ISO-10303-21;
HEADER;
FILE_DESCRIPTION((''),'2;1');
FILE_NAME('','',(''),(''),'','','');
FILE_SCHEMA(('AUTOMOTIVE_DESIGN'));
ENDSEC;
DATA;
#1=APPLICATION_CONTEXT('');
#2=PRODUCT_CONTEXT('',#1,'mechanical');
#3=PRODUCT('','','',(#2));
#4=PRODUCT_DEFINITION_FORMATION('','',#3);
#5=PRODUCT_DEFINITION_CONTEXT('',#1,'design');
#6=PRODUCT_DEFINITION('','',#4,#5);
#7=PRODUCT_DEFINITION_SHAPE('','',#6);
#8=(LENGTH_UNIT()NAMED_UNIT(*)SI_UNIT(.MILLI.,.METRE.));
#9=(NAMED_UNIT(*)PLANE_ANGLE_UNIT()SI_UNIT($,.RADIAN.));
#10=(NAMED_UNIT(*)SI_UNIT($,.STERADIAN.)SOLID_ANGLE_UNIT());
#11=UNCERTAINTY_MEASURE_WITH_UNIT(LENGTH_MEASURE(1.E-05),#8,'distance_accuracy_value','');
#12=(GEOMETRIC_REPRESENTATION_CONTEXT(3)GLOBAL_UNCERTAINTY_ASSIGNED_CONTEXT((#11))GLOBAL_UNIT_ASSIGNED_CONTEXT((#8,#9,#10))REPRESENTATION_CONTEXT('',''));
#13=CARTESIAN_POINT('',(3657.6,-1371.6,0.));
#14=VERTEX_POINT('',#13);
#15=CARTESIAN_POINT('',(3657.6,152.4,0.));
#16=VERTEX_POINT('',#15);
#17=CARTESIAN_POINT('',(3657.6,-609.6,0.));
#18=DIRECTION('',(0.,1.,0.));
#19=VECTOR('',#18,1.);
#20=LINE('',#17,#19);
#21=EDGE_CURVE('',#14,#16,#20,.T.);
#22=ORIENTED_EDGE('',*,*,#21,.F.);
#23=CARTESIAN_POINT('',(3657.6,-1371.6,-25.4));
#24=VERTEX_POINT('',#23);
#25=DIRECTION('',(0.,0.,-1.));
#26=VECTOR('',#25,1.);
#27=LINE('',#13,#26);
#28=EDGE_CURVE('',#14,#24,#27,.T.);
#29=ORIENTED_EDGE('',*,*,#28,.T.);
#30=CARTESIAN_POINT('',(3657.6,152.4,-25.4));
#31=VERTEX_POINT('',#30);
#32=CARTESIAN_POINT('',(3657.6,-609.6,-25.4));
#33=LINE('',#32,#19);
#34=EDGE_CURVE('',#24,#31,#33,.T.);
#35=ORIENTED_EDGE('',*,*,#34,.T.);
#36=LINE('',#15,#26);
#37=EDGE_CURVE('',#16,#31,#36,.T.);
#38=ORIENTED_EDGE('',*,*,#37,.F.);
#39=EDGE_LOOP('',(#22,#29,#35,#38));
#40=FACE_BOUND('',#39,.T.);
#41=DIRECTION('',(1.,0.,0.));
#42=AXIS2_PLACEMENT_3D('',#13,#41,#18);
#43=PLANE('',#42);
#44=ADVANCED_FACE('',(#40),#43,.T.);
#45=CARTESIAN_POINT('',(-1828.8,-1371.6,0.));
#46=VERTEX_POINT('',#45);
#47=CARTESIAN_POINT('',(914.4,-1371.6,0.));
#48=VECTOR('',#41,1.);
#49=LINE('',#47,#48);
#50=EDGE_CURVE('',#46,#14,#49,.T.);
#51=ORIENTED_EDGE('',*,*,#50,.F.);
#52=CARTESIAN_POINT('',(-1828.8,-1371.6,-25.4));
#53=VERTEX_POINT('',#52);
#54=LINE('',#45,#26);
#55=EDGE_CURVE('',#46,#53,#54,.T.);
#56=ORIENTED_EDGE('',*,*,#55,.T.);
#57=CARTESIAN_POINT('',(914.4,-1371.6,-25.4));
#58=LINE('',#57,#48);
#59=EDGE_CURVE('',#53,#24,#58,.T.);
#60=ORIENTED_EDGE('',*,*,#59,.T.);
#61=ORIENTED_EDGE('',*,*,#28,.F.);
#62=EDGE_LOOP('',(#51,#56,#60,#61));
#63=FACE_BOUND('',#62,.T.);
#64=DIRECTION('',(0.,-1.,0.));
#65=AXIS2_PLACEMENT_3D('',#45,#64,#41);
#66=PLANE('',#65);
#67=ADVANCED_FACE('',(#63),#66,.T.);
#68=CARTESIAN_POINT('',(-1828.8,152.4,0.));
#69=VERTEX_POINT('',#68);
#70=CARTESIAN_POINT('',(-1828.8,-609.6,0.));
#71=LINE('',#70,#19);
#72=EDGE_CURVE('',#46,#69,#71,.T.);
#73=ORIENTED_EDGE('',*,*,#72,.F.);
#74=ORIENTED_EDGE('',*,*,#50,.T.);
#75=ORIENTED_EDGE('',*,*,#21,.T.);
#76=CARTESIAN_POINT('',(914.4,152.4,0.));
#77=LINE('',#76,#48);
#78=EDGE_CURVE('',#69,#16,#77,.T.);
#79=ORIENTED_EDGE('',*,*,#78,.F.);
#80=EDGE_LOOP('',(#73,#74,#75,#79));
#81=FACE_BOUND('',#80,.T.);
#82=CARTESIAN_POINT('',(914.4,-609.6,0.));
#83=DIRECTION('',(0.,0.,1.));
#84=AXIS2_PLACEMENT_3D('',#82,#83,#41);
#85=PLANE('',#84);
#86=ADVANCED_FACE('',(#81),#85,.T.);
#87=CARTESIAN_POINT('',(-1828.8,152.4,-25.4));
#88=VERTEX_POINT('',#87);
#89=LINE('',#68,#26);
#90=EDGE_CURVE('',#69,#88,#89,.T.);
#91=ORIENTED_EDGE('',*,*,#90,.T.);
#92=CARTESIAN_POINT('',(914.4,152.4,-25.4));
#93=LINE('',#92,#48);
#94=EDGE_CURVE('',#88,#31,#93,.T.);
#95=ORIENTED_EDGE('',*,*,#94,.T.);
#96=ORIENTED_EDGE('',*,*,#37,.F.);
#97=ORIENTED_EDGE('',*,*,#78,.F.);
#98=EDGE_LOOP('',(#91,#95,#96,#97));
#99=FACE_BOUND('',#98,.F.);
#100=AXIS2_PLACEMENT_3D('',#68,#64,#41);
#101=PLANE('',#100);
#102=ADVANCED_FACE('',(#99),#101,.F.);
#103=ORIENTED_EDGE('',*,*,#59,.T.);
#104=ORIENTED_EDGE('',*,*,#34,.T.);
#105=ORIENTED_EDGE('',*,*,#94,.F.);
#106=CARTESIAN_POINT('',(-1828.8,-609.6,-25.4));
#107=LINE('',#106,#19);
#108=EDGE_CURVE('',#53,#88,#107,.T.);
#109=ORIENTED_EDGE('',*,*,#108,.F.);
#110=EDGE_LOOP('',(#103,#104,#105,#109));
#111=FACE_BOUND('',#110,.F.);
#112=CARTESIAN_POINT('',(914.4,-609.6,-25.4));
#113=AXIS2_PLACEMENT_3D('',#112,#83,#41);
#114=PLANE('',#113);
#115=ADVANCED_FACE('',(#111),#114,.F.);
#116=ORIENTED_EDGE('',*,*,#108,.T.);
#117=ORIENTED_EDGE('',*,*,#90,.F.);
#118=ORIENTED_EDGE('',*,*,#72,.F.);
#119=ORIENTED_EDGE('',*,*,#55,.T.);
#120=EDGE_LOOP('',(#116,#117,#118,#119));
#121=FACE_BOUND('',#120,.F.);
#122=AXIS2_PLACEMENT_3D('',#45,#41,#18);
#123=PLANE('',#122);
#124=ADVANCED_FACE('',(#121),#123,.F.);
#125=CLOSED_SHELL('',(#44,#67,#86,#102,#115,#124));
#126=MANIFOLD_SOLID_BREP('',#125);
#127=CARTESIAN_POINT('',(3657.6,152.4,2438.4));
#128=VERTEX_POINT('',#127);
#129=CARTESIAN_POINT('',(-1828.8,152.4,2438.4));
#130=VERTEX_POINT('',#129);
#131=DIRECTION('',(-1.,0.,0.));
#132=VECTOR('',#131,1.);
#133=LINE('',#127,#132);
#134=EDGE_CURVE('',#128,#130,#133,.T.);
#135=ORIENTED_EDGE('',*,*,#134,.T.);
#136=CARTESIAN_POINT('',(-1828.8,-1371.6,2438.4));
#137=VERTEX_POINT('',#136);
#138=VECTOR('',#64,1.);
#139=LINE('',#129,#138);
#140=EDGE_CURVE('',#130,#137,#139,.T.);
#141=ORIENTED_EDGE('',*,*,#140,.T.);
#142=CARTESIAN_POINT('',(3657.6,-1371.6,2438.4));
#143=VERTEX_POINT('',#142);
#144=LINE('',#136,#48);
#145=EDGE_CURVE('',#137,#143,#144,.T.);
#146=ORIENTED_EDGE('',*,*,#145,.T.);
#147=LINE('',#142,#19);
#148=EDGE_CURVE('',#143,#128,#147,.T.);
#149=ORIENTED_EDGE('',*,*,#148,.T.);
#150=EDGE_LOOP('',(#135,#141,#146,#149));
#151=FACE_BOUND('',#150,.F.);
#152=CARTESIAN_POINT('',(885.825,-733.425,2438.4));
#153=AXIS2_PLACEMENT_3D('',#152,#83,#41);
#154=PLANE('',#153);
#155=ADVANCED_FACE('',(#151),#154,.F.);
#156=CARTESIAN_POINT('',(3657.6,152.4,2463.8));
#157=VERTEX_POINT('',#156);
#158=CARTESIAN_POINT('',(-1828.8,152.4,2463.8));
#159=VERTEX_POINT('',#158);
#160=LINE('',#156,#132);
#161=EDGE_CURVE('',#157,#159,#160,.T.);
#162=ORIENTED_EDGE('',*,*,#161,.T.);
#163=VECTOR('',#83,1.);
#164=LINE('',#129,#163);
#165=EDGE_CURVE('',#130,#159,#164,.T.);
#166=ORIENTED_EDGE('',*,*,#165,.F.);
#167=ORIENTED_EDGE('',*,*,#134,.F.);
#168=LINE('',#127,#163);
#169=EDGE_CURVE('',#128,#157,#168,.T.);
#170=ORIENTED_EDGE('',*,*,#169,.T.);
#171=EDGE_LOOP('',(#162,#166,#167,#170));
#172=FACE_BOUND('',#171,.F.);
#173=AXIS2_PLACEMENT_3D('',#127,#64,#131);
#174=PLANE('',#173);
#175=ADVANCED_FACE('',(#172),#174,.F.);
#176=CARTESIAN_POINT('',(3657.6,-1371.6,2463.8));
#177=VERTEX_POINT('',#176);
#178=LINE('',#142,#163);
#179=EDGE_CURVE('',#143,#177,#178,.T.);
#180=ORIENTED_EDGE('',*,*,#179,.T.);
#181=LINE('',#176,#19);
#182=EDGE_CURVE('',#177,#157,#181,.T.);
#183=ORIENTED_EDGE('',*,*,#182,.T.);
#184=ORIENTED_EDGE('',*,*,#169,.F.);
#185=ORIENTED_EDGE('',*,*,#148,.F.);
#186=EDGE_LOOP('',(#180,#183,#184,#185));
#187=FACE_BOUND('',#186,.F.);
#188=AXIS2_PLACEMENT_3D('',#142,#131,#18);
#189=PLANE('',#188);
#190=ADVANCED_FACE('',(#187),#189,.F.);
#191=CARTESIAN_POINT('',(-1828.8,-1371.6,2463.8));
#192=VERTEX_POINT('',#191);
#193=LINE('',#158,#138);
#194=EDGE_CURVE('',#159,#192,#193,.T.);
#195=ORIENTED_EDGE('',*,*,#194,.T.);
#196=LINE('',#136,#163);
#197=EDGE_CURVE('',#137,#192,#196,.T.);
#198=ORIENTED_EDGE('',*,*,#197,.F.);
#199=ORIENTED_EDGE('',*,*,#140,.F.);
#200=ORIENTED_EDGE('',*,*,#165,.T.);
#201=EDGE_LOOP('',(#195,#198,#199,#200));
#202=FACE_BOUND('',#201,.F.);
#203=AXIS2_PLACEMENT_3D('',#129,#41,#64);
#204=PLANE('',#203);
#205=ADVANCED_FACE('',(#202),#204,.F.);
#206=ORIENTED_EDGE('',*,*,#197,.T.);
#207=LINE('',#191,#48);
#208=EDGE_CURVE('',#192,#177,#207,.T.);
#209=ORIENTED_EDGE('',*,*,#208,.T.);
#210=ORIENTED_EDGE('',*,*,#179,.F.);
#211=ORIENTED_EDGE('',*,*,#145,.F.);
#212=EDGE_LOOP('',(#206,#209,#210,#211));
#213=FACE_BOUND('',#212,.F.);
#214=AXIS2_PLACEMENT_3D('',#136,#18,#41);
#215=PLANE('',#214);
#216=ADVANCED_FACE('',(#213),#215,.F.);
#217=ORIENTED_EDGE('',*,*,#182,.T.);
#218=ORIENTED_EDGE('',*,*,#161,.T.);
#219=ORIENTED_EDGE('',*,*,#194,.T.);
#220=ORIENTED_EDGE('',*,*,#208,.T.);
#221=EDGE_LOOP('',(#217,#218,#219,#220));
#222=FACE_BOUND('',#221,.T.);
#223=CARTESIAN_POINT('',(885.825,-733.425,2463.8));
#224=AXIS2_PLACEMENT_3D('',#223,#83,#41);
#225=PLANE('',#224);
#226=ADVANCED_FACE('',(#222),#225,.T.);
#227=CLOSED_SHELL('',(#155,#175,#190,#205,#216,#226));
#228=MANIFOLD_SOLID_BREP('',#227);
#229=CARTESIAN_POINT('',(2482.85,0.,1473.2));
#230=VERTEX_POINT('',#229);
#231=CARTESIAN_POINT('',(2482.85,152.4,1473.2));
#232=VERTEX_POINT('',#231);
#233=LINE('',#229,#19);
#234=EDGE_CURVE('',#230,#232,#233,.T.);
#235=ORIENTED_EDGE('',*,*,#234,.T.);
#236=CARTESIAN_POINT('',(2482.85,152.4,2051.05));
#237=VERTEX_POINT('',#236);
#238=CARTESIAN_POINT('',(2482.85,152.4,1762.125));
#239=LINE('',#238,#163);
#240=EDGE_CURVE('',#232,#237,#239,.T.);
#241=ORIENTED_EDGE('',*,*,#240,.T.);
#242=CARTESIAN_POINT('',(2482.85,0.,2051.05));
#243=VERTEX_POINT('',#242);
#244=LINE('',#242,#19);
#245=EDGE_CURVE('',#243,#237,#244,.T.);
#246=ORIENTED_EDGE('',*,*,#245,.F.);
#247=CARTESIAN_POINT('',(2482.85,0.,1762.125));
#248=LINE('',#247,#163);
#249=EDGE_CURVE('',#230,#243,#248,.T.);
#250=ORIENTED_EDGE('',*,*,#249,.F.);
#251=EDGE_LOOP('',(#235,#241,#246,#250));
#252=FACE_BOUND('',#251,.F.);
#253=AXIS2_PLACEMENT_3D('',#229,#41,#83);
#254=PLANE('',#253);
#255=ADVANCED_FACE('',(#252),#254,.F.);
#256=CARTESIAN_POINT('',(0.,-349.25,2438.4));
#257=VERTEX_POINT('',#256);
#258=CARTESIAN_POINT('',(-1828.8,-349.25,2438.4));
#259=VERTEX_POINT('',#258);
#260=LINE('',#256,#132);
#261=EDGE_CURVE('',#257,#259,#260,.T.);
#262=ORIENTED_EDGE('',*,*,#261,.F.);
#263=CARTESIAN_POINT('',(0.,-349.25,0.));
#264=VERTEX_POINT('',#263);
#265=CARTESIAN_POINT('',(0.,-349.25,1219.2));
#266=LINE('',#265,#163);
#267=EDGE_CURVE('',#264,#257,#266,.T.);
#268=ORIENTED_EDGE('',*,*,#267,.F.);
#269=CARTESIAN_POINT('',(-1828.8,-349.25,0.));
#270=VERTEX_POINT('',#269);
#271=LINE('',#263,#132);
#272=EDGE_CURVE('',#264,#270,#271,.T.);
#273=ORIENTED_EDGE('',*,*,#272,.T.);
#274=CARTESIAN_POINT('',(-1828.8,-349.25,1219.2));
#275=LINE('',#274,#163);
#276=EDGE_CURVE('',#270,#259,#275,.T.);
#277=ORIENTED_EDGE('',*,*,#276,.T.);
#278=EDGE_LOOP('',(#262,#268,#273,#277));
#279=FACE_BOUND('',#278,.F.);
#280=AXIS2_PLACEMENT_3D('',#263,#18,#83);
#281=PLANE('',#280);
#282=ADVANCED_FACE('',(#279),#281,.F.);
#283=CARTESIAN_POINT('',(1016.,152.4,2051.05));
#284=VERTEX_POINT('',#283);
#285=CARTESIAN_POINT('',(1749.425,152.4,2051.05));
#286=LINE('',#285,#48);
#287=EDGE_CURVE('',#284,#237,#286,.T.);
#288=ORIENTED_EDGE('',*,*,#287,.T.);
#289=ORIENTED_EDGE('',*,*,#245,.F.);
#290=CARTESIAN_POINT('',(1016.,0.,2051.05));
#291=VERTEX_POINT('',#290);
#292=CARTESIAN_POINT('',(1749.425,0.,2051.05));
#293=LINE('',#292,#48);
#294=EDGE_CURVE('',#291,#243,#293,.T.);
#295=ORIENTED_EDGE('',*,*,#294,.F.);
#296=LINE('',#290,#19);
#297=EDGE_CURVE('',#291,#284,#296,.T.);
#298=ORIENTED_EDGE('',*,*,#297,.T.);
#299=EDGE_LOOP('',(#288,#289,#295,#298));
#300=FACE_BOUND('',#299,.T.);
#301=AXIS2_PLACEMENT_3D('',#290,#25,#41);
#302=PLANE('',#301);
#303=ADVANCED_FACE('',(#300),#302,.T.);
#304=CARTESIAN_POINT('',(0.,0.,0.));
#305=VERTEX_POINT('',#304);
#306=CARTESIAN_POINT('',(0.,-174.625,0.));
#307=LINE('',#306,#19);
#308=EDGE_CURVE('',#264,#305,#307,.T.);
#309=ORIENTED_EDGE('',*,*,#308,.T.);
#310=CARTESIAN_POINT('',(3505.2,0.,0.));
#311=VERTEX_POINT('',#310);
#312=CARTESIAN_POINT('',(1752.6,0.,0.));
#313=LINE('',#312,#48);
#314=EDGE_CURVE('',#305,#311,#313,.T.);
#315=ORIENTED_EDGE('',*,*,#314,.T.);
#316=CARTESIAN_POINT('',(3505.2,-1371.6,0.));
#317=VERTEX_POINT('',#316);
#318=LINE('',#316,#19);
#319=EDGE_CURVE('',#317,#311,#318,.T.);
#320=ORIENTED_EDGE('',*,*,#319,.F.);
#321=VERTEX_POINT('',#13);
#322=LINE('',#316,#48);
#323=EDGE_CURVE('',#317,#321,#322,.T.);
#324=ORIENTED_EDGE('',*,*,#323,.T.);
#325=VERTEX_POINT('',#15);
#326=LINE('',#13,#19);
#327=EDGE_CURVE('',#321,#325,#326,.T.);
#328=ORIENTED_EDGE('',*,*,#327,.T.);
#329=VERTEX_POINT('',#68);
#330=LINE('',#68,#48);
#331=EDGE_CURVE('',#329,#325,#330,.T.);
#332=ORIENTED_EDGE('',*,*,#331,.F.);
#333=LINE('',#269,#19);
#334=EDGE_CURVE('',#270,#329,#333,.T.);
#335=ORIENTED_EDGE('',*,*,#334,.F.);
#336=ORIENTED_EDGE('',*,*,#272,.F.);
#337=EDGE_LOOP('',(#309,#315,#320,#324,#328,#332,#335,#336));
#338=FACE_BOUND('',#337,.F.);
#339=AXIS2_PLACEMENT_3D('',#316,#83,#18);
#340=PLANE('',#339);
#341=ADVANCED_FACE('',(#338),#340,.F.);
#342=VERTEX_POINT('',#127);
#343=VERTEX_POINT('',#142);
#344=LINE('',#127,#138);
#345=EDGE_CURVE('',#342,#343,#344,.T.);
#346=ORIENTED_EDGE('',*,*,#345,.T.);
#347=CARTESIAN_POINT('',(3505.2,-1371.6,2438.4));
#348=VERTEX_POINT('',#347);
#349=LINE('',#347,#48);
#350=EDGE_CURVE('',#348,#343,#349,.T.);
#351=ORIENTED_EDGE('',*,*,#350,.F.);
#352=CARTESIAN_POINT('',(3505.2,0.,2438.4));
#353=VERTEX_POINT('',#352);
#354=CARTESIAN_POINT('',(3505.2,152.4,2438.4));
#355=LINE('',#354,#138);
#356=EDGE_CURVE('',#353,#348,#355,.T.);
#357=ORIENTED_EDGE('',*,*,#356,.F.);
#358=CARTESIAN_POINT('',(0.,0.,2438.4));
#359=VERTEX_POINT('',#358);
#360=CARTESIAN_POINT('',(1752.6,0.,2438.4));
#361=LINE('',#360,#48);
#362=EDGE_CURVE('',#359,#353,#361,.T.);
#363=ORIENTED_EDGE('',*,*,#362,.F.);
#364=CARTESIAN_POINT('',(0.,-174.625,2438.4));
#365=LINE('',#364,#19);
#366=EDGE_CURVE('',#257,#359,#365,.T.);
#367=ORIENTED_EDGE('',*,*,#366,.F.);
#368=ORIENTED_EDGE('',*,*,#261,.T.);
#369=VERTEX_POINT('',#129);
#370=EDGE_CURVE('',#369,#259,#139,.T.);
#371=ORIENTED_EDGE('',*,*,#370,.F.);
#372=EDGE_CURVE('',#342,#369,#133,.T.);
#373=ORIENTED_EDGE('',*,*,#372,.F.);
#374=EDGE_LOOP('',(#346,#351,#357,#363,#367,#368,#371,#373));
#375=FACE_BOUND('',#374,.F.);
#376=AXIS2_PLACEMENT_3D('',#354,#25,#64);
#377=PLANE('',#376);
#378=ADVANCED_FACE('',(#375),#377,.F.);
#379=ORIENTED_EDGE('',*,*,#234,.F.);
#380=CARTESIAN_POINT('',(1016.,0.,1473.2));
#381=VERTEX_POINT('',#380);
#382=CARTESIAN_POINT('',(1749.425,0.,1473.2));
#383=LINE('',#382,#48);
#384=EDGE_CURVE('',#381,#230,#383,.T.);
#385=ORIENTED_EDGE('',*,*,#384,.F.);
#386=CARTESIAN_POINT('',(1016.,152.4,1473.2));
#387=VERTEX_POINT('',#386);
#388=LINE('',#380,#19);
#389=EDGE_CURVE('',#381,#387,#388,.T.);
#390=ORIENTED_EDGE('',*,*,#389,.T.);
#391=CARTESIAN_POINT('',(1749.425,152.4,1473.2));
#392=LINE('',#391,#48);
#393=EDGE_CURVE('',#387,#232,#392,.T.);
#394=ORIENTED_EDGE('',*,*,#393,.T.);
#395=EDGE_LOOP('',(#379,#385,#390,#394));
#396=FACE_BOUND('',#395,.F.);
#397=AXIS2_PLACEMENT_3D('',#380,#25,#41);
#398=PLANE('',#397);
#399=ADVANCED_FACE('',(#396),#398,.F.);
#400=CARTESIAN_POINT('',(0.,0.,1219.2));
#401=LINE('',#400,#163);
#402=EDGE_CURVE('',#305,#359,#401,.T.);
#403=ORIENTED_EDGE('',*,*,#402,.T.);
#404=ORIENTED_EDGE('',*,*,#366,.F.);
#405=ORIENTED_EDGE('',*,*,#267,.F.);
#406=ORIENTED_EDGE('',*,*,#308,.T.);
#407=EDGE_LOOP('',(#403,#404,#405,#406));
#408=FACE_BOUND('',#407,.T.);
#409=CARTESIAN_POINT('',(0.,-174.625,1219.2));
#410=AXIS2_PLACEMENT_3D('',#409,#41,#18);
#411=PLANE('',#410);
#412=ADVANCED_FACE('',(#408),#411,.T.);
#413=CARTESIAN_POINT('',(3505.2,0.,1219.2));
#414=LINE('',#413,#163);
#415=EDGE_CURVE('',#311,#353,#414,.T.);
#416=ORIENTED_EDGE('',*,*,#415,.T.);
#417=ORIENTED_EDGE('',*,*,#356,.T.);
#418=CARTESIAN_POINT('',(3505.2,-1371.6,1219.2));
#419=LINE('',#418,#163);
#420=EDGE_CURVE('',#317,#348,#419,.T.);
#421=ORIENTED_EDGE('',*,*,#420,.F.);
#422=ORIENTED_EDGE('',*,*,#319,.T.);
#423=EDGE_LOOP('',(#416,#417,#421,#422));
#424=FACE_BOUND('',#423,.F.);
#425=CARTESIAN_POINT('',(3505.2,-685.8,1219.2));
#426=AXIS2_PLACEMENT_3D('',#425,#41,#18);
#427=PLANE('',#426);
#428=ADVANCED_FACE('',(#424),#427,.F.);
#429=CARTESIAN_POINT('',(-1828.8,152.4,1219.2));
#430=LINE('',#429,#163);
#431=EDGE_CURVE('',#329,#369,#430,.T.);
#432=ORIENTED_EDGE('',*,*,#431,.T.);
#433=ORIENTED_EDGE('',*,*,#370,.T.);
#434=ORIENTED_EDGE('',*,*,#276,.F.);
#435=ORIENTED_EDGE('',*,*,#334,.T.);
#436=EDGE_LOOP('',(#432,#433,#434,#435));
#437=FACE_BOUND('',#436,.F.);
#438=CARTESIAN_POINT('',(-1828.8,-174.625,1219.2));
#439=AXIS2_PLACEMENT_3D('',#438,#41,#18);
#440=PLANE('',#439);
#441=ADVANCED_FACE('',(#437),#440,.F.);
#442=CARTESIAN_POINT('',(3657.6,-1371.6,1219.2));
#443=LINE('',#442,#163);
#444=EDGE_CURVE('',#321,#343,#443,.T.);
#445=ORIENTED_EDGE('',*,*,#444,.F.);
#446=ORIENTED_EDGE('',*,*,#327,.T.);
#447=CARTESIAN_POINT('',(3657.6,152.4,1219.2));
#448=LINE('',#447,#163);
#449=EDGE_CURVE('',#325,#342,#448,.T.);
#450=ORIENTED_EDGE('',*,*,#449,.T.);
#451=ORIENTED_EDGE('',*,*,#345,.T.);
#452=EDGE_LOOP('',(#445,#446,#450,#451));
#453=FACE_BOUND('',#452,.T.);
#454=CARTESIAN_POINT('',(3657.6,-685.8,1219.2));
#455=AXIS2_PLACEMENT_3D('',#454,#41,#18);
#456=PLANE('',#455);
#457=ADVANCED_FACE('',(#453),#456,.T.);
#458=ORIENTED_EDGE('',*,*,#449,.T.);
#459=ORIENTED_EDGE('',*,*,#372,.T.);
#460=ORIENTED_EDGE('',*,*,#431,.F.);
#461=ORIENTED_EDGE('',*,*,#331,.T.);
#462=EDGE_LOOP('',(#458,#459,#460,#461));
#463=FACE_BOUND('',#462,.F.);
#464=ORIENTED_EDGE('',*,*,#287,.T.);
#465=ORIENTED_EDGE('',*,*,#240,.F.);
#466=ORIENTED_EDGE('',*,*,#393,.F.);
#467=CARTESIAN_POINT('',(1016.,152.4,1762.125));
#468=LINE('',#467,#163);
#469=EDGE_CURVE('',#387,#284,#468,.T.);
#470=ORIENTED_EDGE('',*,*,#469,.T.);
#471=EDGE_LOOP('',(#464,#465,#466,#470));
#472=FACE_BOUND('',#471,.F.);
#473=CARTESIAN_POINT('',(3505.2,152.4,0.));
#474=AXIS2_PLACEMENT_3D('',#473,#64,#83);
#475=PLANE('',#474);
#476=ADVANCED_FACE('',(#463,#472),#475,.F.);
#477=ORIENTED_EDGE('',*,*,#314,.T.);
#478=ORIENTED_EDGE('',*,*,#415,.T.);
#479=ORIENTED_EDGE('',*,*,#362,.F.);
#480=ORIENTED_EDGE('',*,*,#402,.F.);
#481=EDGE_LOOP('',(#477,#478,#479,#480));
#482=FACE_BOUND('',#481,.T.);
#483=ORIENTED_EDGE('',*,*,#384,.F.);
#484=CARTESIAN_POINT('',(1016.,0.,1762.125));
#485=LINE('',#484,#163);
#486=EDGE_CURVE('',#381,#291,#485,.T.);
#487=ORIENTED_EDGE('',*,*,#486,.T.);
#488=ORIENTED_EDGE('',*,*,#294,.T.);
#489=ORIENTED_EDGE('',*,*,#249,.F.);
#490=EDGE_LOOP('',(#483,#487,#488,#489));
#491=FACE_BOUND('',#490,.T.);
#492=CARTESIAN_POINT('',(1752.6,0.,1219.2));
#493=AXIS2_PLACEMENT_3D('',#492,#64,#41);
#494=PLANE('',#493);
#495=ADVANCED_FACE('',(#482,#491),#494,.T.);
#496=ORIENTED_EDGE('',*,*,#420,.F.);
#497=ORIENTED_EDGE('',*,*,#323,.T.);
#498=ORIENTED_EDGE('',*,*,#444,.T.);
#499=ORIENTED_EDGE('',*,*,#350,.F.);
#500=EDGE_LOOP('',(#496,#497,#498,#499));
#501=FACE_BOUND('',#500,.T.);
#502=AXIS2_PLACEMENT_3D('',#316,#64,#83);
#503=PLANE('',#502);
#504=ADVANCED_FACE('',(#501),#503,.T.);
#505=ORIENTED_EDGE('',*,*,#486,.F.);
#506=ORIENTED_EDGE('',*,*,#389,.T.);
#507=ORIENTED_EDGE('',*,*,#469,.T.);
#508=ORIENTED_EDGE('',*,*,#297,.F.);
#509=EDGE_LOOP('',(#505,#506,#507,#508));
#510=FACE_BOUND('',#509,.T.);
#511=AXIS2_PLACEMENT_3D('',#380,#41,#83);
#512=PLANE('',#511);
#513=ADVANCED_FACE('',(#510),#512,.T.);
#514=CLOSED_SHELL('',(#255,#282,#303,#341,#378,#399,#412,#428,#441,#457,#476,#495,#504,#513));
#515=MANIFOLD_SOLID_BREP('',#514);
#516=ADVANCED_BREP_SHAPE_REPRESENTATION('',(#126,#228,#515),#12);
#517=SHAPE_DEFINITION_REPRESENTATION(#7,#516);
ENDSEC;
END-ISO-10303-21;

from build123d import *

# Parameters (mm, degrees)
F0_W      = 3505.2
F0_H      = 2438.4
F0_W_2    = 1466.85
F0_H_2    = 577.85
F1_DEPTH  = 152.4
F2_W      = 349.25
F2_H      = 2438.4
F1_FACE_W = 152.4
F1_FACE_H = 2438.4
F3_DEPTH  = 1828.8
F4_W      = 1371.6
F4_H      = 2438.4
F4_W_2    = 152.4
F5_DEPTH  = 152.4
F7_DEPTH  = 25.4
F8_W      = 5486.4
F8_H      = 1524
F9_DEPTH  = 25.4


with BuildPart() as f1:
    # F0 (on Front) → F1 (new body)
    with BuildSketch(Plane.XZ):
        with Locations((1752.6, 1219.2)):
            Rectangle(F0_W, F0_H)
        with Locations((1749.425, 1762.125)):
            Rectangle(F0_W_2, F0_H_2, mode=Mode.SUBTRACT)
    extrude(amount=-F1_DEPTH)

    # F2 (on Right) + F1_face (on face) → F3 (join)
    with BuildSketch(Plane.YZ):
        with Locations((-174.625, 1219.2)):
            Rectangle(F2_W, F2_H)
    with BuildSketch(Plane(origin=(0, 76.2, 1219.2), x_dir=(0, -1, 0), z_dir=(-1, 0, 0))):
        Rectangle(F1_FACE_W, F1_FACE_H)
    extrude(amount=-F3_DEPTH, dir=(1, 0, 0))

    # F4 (on face) → F5 (join)
    with BuildSketch(Plane.YZ.offset(3505.2)):
        with Locations((-685.8, 1219.2)):
            Rectangle(F4_W, F4_H)
        with Locations((76.2, 1219.2)):
            Rectangle(F4_W_2, F4_H)
    extrude(amount=F5_DEPTH)


with BuildPart() as f7:
    # F6 (on face) → F7 (new body)
    with BuildSketch(Plane.XY.offset(2438.4)):
        Polygon((-1828.8, -1371.6), (3505.2, -1371.6), (3505.2, 0), (0, 0), (0, -349.25), (-1828.8, -349.25), align=None)
        Polygon((3657.6, -1371.6), (3657.6, 152.4), (-1828.8, 152.4), (-1828.8, -349.25), (0, -349.25), (0, 0), (3505.2, 0), (3505.2, -1371.6), align=None)
    extrude(amount=F7_DEPTH)


with BuildPart() as f9:
    # F8 (on Top) → F9 (new body)
    with BuildSketch(Plane.XY):
        with Locations((914.4, -609.6)):
            Rectangle(F8_W, F8_H)
    extrude(amount=-F9_DEPTH)


solid = Compound([f1.part, f7.part, f9.part])
